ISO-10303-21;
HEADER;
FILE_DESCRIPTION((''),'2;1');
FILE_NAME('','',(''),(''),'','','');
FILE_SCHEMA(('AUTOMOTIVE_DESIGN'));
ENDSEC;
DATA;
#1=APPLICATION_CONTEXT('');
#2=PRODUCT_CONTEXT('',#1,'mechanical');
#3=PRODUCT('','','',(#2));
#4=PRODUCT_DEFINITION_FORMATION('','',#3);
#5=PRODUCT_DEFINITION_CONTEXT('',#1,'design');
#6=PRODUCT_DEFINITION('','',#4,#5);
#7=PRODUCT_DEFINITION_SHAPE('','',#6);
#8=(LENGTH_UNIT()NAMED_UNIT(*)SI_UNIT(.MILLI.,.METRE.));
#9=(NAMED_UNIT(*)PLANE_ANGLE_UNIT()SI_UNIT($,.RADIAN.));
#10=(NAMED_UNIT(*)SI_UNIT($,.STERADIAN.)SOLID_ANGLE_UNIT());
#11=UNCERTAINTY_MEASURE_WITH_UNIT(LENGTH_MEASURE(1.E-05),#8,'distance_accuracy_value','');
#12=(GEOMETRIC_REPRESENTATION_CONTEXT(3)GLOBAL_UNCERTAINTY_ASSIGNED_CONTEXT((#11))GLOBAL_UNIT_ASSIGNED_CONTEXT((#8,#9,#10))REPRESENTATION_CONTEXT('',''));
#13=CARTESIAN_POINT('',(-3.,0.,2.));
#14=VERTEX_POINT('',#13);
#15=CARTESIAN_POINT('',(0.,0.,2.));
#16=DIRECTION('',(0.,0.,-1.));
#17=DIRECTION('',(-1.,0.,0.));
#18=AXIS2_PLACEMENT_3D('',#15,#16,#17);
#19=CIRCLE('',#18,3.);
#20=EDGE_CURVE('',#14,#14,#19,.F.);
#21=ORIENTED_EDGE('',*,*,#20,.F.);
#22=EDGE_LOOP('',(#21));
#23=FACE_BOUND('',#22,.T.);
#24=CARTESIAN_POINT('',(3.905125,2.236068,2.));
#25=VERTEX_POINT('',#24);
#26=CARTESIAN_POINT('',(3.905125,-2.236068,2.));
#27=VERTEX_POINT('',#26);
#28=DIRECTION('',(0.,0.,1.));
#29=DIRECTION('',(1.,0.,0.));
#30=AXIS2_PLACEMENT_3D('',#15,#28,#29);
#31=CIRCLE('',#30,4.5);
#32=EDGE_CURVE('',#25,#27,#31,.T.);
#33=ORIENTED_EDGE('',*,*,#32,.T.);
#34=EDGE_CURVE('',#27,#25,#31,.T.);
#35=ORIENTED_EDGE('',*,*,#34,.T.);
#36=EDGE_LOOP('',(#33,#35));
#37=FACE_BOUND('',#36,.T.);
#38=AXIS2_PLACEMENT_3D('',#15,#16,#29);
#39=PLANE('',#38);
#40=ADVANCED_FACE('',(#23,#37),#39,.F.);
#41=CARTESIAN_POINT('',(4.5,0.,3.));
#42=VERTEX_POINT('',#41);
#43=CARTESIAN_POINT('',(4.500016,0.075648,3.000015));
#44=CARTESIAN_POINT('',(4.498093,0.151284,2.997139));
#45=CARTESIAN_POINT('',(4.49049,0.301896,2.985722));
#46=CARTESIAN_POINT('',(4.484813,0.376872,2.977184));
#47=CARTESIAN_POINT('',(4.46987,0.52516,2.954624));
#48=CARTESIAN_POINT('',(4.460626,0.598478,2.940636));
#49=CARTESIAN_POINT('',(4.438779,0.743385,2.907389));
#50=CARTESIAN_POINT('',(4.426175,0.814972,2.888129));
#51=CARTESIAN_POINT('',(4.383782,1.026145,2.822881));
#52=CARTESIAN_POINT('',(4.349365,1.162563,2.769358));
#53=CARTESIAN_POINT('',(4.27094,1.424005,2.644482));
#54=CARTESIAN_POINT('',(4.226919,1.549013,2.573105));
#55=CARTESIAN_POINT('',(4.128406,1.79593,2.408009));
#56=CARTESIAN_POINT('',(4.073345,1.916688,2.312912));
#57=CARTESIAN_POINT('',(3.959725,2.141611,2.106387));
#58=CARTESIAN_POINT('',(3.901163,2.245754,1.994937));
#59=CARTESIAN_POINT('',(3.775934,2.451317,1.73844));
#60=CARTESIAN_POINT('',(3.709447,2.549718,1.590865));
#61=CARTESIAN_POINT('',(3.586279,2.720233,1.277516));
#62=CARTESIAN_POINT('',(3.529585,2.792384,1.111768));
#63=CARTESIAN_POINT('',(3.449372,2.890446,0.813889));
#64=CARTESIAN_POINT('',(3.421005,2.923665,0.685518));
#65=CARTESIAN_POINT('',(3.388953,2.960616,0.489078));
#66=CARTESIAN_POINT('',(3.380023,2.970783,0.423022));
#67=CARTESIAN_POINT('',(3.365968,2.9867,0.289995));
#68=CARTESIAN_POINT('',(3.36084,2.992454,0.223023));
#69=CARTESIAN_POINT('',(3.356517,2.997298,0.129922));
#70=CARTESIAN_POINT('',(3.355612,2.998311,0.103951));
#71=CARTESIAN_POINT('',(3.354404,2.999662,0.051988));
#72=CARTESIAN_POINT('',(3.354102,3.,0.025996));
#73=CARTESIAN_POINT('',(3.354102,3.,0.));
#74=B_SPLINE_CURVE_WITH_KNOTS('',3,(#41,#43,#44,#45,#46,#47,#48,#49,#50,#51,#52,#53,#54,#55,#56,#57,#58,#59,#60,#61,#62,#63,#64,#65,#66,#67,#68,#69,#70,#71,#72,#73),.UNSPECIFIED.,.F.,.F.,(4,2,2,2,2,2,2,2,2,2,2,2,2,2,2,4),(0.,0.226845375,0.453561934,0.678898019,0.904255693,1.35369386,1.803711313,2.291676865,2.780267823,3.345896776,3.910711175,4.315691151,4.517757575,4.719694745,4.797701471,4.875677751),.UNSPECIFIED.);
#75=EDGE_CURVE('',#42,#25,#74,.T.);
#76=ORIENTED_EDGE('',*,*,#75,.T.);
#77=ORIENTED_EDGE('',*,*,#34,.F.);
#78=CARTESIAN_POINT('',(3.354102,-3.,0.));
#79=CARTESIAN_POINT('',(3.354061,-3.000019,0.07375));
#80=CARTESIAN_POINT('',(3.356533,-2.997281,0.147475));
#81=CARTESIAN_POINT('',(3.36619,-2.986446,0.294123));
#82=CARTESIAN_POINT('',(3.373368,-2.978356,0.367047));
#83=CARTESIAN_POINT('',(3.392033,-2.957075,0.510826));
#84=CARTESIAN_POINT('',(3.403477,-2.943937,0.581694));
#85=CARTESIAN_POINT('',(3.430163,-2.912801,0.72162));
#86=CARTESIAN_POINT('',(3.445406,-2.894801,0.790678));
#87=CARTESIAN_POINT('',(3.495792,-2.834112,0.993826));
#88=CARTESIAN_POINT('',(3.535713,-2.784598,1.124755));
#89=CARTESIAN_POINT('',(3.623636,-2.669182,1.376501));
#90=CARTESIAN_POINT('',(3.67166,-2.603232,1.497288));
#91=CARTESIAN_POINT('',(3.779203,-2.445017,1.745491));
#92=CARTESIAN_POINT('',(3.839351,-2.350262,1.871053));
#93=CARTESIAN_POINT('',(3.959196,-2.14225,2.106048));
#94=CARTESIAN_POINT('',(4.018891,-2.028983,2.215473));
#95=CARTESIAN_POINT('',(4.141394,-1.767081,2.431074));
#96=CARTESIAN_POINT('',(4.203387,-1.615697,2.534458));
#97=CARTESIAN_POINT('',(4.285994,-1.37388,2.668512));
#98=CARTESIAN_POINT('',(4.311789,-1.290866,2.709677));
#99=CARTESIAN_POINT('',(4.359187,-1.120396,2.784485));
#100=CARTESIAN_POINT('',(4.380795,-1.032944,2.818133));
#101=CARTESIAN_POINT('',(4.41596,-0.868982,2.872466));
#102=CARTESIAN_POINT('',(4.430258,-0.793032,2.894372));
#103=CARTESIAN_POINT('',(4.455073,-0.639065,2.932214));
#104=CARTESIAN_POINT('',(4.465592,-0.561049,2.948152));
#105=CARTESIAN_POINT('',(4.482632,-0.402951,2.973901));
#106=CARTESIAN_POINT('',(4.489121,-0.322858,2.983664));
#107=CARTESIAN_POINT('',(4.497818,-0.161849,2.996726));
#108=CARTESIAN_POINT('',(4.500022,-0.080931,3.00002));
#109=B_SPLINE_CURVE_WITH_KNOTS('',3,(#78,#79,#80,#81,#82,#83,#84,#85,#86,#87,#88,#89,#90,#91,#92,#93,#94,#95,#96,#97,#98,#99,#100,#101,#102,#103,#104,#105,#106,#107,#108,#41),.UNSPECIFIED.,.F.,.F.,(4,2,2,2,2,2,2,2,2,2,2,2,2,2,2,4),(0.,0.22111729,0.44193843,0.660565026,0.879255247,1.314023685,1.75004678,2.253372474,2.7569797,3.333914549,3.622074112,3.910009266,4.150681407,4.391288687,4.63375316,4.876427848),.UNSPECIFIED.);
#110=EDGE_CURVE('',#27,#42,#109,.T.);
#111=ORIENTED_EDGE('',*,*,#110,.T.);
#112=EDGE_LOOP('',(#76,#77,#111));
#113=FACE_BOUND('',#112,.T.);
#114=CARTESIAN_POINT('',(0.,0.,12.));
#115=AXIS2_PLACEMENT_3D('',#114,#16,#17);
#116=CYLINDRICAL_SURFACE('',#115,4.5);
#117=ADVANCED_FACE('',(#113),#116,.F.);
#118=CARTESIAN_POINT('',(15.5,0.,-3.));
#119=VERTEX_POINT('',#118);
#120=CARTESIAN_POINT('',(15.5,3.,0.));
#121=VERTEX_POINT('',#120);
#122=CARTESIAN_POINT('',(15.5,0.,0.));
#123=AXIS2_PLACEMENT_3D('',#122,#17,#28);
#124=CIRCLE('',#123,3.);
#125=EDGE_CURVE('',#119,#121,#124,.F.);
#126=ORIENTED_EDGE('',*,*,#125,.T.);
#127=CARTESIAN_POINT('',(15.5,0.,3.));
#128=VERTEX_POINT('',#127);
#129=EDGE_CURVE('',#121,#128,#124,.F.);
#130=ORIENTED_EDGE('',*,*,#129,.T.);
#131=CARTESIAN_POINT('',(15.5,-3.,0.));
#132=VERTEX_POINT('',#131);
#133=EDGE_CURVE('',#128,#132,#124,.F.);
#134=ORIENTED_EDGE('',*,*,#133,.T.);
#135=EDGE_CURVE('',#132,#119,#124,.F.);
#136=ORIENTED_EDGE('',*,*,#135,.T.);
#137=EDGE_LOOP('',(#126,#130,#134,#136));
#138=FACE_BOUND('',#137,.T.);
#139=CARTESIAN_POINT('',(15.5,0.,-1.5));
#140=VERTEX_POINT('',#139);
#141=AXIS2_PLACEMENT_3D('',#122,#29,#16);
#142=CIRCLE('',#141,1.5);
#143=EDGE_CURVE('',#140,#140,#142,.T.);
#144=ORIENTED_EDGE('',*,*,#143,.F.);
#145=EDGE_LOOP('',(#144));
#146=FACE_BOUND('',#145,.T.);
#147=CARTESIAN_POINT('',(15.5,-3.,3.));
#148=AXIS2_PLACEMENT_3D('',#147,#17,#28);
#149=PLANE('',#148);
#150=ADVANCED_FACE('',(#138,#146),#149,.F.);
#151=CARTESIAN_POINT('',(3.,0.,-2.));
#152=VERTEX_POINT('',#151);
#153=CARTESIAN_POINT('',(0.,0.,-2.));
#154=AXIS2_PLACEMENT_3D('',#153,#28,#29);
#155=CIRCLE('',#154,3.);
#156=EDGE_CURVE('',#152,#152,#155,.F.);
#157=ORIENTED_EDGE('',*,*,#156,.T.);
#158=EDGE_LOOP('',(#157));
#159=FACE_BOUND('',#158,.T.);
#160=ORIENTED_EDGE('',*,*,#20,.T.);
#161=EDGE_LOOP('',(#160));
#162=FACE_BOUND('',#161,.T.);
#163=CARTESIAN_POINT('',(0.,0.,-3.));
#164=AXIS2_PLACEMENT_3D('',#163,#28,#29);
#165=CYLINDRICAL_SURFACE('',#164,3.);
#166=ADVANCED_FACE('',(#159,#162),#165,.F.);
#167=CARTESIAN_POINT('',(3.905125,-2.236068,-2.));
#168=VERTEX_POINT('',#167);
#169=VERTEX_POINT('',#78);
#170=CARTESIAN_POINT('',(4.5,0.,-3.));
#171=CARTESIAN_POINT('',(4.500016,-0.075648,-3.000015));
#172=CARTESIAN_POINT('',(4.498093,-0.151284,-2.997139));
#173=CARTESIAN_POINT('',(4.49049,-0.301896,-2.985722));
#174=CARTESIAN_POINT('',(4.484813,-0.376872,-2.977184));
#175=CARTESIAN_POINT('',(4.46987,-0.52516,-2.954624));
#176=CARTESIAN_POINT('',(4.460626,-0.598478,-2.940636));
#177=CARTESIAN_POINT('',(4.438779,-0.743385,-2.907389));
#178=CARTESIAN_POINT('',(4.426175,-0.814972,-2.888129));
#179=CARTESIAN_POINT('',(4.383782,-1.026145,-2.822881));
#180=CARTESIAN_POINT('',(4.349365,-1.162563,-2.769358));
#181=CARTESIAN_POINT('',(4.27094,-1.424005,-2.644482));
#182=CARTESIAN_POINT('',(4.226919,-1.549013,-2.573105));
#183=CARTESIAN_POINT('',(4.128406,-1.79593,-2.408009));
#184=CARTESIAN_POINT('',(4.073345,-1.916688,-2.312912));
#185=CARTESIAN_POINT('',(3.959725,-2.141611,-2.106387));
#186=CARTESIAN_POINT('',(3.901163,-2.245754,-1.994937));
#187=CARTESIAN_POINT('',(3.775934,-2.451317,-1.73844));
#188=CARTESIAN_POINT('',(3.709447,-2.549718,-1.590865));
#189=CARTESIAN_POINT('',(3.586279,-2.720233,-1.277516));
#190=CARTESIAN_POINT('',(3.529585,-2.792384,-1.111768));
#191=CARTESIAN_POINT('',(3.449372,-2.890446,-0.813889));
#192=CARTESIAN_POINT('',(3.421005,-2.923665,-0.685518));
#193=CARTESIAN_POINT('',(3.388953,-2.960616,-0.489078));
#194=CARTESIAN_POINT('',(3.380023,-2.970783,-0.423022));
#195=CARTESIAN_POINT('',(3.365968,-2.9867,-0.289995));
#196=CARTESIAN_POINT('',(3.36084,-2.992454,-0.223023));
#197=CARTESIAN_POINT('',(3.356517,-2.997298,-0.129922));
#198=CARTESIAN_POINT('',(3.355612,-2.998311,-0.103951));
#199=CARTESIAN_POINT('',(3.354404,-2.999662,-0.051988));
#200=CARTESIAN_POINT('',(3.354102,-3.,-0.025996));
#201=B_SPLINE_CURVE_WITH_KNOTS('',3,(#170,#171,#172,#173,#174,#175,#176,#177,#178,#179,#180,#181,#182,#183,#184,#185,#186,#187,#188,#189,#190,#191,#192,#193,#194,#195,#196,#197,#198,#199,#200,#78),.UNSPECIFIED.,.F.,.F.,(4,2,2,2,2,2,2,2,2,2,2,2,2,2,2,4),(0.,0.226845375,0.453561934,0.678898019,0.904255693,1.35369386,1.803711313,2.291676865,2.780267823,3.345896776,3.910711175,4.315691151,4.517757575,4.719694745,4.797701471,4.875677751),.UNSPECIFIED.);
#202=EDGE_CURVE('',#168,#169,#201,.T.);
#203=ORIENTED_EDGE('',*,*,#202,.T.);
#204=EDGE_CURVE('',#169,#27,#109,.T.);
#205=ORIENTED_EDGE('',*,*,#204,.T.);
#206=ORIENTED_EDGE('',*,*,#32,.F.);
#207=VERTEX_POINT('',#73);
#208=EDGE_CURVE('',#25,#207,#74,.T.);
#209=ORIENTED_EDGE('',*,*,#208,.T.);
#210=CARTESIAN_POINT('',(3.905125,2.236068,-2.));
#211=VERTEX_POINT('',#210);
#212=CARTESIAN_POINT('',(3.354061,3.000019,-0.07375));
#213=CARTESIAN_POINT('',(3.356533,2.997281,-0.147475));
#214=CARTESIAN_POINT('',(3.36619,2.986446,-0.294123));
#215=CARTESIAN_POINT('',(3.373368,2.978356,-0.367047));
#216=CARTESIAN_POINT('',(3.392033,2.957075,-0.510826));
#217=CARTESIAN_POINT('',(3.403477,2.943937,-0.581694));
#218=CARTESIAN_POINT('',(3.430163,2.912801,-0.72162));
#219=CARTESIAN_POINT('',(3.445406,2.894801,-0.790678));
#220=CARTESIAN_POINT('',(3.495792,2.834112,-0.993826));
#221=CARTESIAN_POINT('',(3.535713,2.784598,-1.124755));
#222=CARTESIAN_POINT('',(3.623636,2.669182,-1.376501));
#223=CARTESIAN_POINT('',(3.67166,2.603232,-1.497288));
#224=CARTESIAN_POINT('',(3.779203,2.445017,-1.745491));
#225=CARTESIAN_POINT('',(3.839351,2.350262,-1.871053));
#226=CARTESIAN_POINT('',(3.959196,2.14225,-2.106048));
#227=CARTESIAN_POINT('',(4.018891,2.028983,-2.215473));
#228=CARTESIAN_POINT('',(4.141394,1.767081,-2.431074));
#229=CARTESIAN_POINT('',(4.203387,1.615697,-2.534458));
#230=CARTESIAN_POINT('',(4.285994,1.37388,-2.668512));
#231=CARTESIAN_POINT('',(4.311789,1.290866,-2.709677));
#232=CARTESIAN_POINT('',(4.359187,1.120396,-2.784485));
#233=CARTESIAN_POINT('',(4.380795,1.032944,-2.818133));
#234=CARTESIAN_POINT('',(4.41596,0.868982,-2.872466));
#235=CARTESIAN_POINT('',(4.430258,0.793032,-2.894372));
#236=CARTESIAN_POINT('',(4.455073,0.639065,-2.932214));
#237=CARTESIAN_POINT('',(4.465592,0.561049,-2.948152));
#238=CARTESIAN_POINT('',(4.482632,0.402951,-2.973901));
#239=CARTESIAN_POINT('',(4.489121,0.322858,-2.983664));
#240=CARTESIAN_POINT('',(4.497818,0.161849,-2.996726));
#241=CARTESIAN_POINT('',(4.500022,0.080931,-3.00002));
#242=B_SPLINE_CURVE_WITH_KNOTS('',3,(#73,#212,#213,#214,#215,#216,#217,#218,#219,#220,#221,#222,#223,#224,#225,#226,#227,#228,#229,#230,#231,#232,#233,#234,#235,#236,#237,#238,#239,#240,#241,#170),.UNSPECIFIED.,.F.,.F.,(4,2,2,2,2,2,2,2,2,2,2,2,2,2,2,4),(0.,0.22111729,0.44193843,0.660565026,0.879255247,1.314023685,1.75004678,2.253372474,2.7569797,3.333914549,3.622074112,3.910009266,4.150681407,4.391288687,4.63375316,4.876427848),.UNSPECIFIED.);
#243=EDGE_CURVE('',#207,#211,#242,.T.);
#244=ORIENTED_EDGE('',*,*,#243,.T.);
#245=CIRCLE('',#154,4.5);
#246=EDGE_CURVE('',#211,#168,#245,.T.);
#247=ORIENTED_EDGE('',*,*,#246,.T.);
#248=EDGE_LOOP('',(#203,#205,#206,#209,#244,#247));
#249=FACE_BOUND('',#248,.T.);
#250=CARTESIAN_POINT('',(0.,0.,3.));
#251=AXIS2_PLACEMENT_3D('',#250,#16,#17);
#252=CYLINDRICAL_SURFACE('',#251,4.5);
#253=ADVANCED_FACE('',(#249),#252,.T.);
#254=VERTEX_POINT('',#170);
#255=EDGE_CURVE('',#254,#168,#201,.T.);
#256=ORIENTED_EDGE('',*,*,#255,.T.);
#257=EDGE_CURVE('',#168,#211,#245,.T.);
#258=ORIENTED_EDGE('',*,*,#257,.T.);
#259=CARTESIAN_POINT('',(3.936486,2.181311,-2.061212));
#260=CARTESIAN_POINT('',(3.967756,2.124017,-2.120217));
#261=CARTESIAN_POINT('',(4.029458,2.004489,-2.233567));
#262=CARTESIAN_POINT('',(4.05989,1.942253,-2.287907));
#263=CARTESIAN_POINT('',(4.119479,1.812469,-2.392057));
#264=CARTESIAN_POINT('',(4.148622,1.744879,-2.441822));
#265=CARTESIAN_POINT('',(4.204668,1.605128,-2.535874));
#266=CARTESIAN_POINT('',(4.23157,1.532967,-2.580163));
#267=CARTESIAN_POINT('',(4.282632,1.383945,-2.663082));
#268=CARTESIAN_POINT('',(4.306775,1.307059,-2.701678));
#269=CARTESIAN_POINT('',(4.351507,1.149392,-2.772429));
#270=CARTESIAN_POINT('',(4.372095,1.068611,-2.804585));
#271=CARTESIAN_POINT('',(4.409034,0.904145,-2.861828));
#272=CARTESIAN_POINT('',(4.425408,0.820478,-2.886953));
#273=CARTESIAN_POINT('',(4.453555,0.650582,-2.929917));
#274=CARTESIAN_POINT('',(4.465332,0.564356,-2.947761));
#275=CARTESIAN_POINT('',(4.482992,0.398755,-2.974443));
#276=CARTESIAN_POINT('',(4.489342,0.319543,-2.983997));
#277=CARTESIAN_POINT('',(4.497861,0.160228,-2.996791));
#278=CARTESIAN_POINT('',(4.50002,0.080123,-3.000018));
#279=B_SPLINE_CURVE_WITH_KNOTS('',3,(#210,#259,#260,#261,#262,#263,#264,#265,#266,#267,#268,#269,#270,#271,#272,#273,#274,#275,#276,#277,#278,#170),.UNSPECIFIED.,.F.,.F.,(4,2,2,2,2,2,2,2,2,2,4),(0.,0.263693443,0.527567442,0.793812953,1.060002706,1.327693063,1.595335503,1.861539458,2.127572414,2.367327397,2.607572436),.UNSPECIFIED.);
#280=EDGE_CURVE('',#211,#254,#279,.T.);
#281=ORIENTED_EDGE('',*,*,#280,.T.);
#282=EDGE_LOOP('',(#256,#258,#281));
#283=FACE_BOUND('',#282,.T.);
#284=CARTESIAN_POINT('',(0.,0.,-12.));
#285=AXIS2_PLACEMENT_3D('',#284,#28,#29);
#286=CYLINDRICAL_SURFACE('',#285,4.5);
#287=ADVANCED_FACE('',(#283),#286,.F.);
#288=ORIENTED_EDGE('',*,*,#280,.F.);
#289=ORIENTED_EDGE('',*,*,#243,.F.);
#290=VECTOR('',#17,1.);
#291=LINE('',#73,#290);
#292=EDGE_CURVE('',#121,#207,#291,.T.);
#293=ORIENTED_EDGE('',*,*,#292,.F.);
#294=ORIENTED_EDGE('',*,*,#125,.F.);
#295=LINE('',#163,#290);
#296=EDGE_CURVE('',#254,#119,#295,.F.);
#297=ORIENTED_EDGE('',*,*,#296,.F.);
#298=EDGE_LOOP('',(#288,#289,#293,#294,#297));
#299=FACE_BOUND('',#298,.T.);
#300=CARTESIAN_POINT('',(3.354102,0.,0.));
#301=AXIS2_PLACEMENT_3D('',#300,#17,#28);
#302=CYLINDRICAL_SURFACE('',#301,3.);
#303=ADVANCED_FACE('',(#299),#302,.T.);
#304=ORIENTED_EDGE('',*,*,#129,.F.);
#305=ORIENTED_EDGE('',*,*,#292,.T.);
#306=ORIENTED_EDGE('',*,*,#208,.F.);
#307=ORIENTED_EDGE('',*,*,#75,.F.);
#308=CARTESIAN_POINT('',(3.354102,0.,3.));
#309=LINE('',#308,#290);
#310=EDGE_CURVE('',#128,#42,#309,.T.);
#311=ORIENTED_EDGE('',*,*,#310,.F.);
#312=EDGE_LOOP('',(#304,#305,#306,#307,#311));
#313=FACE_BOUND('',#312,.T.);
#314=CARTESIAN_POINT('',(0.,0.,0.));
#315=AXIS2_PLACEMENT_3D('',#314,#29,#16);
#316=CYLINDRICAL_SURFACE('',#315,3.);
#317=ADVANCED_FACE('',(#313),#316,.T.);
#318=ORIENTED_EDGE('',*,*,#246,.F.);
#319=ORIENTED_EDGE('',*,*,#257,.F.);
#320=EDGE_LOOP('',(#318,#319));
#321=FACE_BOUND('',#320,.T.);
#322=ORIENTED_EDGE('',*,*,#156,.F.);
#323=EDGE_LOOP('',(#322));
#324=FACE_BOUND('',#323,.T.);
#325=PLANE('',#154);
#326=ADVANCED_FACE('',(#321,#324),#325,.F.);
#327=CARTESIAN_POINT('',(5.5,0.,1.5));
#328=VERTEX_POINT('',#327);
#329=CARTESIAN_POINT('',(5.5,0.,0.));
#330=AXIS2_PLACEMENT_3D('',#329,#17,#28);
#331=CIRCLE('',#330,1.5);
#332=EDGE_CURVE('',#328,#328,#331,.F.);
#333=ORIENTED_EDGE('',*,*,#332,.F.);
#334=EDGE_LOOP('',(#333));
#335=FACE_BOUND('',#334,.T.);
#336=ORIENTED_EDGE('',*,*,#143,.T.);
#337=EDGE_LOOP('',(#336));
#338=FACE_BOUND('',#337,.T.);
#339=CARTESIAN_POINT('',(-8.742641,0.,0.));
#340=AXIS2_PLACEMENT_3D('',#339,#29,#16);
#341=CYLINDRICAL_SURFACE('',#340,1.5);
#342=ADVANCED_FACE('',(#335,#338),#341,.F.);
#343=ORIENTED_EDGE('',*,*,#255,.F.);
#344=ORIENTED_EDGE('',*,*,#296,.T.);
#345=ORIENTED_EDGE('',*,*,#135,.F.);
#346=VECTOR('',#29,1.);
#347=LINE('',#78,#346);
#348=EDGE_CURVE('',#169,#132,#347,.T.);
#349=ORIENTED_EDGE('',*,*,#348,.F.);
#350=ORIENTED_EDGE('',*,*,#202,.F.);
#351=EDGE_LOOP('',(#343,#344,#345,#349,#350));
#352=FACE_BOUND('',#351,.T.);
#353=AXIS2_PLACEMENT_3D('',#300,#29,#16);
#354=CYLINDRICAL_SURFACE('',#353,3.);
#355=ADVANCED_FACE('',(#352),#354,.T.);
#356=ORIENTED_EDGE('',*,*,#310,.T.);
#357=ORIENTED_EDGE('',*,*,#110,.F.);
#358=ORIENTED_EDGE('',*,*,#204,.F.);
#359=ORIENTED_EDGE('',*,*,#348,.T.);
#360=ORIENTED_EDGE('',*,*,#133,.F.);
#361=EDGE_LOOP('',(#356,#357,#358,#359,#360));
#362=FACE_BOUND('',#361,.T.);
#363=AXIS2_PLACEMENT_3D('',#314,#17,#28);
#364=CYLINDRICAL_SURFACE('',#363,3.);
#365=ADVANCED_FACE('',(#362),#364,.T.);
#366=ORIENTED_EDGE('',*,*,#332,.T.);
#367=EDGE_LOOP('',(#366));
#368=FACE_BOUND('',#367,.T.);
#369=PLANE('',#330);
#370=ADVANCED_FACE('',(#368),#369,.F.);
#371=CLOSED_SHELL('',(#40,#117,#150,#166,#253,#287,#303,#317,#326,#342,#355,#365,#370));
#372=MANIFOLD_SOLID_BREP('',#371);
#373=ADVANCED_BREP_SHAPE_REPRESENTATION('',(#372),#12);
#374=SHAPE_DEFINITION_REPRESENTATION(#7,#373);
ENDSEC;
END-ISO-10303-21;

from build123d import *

# Parameters (mm, degrees)
BOSS_EXTRUDE1_DEPTH     = 3
CUT_EXTRUDE1_DEPTH      = 18.219175358
CUT_EXTRUDE1_DEPTH_BACK = 18.219175358
SKETCH10_R              = 3
SKETCH11_R              = 1.5
CUT_EXTRUDE2_DEPTH      = 10
FILLET1_R               = 3
CUT_EXTRUDE3_START      = -2
SKETCH12_R              = 4.5
CUT_EXTRUDE3_DEPTH      = 10


with BuildPart() as part:
    # Sketch1 → Boss-Extrude1 (new, symmetric)
    with BuildSketch(Plane.XY):
        with BuildLine():
            Line((3.354101966, -3), (15.5, -3))
            Line((15.5, -3), (15.5, 3))
            Line((15.5, 3), (3.354101966, 3))
            ThreePointArc((3.354101966, 3), (-4.5, 0), (3.354101966, -3))
        make_face()
    extrude(amount=BOSS_EXTRUDE1_DEPTH, both=True)

    # Sketch10 → Cut-Extrude1 (cut, two sides: drawn at the far end of the back side and taken through both)
    with BuildSketch(Plane.XY.offset(3).offset(-CUT_EXTRUDE1_DEPTH_BACK)):
        Circle(SKETCH10_R)
    extrude(amount=CUT_EXTRUDE1_DEPTH + CUT_EXTRUDE1_DEPTH_BACK, mode=Mode.SUBTRACT)

    # Sketch11 → Cut-Extrude2 (cut)
    with BuildSketch(Plane(origin=(15.5, 0, 0), x_dir=(0, 0, -1), z_dir=(1, 0, 0))):
        Circle(SKETCH11_R)
    extrude(amount=-CUT_EXTRUDE2_DEPTH, mode=Mode.SUBTRACT)

    # Fillet1
    fillet1_edges = [part.edges().sort_by_distance(p)[0] for p in [
        (9.427050983, -3, 3),
        (9.427050983, -3, -3),
        (9.427050983, 3, -3),
        (9.427050983, 3, 3),
    ]]
    fillet(fillet1_edges, radius=FILLET1_R - 0.0001)  # a hair under: the kernel refuses the full size

    # Sketch12 → Cut-Extrude3 (cut)
    with BuildSketch(Plane.XY.offset(CUT_EXTRUDE3_START)):
        Circle(SKETCH12_R)
    cut_extrude3 = extrude(amount=-CUT_EXTRUDE3_DEPTH, mode=Mode.SUBTRACT)

    # Mirror1: Cut-Extrude3 across plane
    add(cut_extrude3.mirror(Plane.XY), mode=Mode.SUBTRACT)


solid = part.part
